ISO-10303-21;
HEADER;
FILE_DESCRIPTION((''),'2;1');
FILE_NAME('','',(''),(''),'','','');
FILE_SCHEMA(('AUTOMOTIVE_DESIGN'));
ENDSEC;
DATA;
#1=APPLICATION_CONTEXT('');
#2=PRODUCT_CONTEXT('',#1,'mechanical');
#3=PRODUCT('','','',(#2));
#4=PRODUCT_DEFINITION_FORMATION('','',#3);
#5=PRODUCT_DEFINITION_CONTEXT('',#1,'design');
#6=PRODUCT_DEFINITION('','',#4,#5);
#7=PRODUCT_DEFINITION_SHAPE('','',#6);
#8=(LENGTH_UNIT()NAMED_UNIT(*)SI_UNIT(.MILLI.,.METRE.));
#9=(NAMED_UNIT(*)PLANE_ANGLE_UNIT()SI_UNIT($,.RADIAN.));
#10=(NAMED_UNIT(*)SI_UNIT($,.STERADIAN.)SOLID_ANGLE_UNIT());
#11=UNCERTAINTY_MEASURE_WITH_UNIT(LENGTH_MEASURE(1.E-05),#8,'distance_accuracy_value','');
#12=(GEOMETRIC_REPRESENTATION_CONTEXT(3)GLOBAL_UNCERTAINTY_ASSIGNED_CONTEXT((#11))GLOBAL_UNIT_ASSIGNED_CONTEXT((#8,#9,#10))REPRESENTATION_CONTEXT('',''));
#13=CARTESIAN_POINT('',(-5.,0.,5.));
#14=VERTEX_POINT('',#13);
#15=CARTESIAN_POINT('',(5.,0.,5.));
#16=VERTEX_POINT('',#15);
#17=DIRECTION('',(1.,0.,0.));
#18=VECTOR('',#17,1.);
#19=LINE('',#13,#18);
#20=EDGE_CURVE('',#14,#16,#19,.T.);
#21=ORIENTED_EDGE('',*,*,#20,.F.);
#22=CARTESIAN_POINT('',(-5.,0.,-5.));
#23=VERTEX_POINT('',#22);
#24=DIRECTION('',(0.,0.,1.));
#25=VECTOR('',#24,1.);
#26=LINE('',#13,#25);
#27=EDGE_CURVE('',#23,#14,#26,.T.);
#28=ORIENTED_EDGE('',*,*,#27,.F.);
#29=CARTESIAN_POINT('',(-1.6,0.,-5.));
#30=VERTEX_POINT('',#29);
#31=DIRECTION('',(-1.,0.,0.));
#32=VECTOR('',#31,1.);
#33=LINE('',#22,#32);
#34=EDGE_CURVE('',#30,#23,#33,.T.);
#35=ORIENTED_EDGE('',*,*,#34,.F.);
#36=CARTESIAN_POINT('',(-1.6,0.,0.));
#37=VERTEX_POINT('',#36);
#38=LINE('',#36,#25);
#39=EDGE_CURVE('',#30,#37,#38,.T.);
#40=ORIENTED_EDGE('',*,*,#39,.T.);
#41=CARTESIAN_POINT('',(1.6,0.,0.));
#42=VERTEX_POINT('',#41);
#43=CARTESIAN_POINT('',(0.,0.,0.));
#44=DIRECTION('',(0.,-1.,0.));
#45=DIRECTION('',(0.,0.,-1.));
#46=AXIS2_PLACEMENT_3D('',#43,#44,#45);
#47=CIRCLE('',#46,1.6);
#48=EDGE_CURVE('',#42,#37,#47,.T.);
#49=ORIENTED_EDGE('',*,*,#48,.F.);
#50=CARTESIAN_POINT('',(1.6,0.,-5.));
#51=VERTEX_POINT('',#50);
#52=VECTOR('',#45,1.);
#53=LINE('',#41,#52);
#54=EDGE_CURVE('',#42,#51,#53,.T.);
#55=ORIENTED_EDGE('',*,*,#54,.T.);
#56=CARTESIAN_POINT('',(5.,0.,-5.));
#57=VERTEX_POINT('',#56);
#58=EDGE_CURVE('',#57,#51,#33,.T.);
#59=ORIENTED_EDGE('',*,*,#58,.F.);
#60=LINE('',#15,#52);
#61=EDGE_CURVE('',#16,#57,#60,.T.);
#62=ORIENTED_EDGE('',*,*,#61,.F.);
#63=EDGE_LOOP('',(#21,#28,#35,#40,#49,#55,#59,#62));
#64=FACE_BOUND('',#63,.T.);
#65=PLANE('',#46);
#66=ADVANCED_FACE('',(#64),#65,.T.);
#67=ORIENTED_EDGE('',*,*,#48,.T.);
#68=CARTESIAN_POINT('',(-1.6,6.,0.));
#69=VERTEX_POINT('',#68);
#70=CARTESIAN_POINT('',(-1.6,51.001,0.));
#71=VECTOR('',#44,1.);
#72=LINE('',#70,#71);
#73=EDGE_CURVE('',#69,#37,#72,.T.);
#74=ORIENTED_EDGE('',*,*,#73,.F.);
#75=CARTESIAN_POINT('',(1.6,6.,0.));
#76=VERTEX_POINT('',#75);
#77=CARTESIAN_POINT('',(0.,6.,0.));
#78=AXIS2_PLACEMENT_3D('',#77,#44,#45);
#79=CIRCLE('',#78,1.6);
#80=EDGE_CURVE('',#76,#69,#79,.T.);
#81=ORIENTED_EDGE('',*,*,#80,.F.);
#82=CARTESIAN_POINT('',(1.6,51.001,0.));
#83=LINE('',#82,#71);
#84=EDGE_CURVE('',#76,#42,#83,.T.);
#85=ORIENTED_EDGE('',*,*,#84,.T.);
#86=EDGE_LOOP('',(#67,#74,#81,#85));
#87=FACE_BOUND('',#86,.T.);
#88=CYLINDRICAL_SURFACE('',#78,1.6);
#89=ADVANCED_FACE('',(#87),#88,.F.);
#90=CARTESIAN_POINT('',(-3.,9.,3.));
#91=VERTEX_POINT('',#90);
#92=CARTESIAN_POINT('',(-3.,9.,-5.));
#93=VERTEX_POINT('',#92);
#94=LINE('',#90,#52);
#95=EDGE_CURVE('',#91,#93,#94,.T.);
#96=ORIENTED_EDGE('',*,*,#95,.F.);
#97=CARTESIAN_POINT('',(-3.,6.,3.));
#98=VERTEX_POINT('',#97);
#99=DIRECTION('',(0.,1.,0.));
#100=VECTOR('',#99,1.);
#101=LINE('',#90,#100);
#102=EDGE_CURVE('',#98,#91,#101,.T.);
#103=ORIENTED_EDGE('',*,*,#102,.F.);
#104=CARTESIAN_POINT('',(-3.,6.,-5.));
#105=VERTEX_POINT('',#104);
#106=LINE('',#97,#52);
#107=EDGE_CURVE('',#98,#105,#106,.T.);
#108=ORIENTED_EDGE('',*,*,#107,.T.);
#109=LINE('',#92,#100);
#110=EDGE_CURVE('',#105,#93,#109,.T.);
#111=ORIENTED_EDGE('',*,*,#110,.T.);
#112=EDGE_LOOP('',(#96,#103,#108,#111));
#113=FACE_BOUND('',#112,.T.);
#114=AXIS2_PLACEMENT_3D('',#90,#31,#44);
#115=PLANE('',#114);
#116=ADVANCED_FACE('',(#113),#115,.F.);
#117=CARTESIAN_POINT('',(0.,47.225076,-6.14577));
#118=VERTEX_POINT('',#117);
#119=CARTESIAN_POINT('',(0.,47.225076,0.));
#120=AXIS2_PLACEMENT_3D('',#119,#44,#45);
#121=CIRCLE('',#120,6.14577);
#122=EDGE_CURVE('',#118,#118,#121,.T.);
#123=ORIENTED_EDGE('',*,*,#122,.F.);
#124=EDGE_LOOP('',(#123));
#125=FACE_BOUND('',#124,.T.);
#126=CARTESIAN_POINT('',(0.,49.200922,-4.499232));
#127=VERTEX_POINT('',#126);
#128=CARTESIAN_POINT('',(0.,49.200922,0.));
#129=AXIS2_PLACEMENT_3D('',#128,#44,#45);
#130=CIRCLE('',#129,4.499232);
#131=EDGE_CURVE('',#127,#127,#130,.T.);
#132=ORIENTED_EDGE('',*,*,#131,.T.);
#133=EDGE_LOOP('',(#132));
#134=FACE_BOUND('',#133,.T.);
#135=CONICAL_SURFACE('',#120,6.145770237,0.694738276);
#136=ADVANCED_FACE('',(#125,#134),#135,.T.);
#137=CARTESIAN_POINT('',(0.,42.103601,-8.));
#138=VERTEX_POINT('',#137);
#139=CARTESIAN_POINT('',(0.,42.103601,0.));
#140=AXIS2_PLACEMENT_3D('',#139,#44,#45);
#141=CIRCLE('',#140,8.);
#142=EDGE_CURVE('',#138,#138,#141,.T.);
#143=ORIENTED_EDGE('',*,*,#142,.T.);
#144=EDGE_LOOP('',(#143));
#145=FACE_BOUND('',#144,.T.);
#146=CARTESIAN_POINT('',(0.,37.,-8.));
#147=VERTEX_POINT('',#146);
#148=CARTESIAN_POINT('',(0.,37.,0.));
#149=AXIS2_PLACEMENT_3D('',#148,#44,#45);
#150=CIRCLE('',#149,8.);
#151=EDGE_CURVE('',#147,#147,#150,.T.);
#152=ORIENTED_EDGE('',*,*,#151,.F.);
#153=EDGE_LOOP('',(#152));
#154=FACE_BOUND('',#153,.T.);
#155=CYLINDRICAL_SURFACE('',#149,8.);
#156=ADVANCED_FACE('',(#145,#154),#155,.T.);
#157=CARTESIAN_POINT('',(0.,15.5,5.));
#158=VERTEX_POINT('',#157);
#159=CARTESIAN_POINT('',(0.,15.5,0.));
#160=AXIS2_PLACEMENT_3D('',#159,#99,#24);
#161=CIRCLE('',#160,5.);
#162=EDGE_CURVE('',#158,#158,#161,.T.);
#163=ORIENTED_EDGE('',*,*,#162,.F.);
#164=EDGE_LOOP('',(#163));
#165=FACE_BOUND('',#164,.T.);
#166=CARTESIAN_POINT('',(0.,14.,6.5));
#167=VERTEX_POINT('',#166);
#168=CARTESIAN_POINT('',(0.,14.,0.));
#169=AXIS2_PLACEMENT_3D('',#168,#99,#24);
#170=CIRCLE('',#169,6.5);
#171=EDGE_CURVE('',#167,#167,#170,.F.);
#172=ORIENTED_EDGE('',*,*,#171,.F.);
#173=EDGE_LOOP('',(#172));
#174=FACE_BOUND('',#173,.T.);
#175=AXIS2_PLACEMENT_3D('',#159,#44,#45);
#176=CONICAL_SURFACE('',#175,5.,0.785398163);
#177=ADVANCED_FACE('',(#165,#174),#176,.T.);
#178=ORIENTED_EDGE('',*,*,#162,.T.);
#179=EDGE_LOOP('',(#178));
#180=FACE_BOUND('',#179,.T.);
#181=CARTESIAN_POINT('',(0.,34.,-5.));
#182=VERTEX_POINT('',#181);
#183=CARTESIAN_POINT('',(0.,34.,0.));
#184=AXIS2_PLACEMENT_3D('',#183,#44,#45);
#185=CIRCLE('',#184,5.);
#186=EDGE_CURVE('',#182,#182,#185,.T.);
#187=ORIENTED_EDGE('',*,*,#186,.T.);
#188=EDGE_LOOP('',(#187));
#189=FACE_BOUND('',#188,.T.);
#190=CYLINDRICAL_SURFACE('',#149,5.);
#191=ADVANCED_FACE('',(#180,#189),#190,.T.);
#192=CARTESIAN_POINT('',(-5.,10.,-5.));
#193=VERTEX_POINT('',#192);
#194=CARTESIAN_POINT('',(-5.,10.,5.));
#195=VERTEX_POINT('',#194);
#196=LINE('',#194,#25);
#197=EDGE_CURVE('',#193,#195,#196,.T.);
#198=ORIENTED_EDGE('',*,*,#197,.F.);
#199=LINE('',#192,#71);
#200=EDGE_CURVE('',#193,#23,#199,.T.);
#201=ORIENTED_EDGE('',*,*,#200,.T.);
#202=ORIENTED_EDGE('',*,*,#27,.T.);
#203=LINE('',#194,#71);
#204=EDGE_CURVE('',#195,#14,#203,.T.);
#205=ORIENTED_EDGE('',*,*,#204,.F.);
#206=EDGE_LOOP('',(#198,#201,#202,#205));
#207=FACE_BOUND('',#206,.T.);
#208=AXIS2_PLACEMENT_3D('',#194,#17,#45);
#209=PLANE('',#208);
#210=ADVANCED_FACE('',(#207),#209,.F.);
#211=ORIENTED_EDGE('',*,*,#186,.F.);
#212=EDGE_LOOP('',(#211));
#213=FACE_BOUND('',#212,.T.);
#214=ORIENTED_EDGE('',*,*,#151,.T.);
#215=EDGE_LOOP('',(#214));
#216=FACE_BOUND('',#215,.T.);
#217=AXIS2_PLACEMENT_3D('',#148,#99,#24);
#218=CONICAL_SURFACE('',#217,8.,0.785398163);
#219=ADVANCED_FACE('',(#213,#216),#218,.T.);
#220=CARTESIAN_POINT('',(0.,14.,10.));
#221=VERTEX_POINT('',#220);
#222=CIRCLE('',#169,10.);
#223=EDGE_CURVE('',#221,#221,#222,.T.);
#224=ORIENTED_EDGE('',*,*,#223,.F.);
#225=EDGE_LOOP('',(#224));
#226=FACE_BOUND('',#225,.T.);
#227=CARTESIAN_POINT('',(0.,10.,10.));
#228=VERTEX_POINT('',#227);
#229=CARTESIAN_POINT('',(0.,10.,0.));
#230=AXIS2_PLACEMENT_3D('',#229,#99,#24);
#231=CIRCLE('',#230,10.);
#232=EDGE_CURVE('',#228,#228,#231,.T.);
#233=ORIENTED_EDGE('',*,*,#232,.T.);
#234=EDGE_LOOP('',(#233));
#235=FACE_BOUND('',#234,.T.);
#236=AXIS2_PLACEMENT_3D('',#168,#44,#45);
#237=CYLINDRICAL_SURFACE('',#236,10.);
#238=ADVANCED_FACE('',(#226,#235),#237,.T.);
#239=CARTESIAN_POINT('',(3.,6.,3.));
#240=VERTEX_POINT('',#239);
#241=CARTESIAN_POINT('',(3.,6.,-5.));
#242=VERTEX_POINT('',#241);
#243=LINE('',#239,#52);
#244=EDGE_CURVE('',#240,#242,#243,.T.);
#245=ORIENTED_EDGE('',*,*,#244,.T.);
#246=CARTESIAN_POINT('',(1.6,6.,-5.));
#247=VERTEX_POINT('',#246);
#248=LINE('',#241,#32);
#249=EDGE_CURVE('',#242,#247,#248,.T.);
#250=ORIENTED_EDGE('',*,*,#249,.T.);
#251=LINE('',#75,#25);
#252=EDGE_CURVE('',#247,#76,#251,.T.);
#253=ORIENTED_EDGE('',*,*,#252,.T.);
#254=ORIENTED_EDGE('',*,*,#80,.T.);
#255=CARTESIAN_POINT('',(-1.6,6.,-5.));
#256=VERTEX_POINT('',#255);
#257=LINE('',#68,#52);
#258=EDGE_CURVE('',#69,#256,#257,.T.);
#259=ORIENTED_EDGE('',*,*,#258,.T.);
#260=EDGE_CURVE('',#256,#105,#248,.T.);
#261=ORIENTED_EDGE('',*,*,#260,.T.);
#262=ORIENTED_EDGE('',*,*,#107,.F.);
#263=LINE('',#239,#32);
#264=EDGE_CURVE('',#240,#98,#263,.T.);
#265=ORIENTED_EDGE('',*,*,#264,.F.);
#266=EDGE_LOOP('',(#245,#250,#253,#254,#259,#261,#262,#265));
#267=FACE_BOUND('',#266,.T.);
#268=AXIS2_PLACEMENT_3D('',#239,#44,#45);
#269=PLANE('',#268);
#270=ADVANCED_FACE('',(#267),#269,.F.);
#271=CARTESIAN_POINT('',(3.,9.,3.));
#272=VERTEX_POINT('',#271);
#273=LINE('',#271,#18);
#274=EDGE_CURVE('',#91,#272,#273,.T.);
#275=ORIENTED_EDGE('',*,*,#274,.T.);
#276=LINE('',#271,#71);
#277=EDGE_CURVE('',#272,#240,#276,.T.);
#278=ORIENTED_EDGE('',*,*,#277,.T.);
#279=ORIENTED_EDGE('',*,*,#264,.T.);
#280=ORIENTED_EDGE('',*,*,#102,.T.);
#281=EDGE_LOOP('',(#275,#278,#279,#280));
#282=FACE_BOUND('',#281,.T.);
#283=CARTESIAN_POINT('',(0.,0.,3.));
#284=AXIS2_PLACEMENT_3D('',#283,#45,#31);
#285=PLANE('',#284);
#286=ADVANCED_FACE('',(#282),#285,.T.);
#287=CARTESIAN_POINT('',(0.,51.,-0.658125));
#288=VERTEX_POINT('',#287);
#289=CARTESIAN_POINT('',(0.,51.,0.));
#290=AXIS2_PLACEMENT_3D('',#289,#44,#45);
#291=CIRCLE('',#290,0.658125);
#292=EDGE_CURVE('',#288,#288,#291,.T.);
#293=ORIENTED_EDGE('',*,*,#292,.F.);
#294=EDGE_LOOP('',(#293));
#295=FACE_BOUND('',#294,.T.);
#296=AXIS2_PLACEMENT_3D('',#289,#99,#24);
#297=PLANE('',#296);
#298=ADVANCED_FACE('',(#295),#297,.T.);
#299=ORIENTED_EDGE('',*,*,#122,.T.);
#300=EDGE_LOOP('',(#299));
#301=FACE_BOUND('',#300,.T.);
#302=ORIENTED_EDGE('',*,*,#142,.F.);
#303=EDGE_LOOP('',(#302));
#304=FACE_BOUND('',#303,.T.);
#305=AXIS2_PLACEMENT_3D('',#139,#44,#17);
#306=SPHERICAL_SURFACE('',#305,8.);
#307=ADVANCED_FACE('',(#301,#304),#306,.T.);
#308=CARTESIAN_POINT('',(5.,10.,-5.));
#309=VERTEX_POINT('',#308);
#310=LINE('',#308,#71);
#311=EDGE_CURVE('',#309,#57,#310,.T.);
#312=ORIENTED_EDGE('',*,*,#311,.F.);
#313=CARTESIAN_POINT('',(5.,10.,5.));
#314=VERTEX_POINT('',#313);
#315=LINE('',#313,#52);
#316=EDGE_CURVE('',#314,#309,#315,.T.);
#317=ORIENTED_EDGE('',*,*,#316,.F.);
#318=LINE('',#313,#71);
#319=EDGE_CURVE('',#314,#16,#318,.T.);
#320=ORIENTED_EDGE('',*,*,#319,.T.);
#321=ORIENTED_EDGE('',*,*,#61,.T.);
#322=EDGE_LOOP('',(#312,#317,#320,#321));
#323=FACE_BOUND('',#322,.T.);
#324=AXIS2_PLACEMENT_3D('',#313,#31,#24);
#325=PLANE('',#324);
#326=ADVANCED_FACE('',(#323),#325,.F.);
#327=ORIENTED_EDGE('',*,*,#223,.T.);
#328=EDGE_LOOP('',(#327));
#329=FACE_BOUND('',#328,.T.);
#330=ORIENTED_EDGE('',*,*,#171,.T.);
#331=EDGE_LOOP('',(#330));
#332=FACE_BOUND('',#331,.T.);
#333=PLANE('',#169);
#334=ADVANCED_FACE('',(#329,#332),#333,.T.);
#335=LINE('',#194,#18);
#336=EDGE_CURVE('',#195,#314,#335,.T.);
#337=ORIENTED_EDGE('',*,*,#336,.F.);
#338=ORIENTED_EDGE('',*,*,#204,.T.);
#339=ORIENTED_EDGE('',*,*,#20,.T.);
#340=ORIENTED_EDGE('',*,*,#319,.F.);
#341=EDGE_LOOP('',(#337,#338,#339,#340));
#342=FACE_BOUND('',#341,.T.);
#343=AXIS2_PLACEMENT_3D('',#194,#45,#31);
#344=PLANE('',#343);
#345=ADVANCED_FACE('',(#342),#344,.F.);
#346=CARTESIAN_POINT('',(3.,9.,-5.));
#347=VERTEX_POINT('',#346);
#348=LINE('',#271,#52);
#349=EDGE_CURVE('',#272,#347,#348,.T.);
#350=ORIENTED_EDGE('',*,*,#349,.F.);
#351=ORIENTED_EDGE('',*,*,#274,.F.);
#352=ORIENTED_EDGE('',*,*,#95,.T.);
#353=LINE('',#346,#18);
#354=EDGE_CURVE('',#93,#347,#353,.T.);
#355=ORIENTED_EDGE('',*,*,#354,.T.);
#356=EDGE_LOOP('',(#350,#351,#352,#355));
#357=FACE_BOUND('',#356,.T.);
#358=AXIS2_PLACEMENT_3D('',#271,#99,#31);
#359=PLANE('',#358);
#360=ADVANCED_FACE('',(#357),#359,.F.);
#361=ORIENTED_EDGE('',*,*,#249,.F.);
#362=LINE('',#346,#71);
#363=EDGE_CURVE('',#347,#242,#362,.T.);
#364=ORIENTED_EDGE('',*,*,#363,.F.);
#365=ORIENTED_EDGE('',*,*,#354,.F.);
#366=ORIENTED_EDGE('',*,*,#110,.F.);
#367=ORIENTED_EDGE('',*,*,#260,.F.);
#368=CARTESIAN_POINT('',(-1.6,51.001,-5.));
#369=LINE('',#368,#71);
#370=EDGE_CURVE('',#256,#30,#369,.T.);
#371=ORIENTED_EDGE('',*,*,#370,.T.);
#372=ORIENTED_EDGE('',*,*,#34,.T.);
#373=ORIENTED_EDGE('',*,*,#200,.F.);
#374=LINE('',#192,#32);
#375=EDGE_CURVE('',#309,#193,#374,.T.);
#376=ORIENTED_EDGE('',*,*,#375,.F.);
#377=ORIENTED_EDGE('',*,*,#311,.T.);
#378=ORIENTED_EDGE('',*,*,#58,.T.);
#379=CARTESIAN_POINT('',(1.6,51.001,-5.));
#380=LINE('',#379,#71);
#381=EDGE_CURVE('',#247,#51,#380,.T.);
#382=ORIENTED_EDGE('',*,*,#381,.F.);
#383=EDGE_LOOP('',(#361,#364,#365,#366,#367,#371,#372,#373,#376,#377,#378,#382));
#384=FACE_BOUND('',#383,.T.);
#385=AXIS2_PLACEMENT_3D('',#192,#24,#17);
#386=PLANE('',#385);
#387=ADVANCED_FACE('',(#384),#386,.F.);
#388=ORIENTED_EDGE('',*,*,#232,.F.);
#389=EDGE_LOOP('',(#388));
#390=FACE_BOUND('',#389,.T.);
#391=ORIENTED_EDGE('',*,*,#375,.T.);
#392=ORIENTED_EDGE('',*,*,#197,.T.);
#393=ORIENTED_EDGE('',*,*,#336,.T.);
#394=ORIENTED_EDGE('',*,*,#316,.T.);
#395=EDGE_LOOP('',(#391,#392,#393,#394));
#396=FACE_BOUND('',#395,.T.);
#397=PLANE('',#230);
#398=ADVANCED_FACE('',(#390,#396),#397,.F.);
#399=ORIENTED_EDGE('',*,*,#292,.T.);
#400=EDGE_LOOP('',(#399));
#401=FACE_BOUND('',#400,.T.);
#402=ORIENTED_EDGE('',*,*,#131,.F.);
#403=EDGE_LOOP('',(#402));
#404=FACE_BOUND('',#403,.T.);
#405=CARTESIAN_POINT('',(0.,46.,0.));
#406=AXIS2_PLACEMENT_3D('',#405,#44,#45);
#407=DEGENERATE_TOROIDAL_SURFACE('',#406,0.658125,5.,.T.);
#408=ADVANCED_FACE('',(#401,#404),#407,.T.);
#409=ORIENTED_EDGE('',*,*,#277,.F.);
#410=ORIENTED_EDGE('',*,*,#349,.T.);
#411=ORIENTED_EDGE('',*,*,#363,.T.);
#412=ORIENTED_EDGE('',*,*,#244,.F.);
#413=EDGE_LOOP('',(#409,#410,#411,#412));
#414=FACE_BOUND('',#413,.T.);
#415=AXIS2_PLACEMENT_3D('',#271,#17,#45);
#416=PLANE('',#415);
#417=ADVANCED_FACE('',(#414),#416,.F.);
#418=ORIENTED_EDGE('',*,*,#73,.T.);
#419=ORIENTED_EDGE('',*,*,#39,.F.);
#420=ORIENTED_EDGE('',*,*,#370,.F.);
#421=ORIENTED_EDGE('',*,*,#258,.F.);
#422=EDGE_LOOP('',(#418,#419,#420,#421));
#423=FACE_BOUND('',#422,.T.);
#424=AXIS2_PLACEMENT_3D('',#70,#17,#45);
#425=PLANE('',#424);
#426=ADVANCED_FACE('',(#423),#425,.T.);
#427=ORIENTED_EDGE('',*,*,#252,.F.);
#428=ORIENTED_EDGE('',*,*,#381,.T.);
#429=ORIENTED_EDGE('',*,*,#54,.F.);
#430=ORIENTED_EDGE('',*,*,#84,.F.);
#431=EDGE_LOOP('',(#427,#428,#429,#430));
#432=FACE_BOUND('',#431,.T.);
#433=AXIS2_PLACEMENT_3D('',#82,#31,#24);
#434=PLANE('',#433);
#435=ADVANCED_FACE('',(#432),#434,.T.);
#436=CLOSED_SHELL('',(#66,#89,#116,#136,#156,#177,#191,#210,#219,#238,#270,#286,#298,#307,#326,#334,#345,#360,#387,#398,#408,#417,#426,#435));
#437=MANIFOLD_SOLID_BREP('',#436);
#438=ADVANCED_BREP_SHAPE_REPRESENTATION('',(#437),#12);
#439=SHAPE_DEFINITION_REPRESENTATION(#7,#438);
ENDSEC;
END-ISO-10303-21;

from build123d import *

# Parameters (mm, degrees)
SKETCH1_W           = 10
SKETCH1_H           = 10
BOSS_EXTRUDE1_DEPTH = 10
SKETCH2_R           = 10
BOSS_EXTRUDE2_DEPTH = 4
SKETCH3_R           = 5
BOSS_EXTRUDE3_DEPTH = 23
CHAMFER1_SIZE       = 3
SKETCH7_R           = 1.6
CUT_EXTRUDE2_DEPTH  = 6
SKETCH8_W           = 6
SKETCH8_H           = 3
CUT_EXTRUDE3_DEPTH  = 8
CUT_EXTRUDE4_REACH  = 54.924
CHAMFER2_SIZE       = 1.5


with BuildPart() as part:
    # Sketch1 → Boss-Extrude1 (new body)
    with BuildSketch(Plane(origin=(0, 0, 0), x_dir=(1, 0, 0), z_dir=(0, 1, 0))):
        Rectangle(SKETCH1_W, SKETCH1_H)
    extrude(amount=BOSS_EXTRUDE1_DEPTH)

    # Sketch2 → Boss-Extrude2 (add)
    with BuildSketch(Plane(origin=(0, 10, 0), x_dir=(1, 0, 0), z_dir=(0, 1, 0))):
        with Locations(Location((0, 0, 0), (0, 0, 270))):
            Circle(SKETCH2_R)
    extrude(amount=BOSS_EXTRUDE2_DEPTH)

    # Sketch3 → Boss-Extrude3 (add)
    with BuildSketch(Plane(origin=(0, 14, 0), x_dir=(1, 0, 0), z_dir=(0, 1, 0))):
        with Locations(Location((0, 0, 0), (0, 0, 270))):
            Circle(SKETCH3_R)
    extrude(amount=BOSS_EXTRUDE3_DEPTH)

    # Sketch4 → Revolve1 (revolve)
    with BuildSketch(Plane.XY, mode=Mode.PRIVATE) as revolve1_sk:
        with BuildLine():
            Line((0, 37), (0, 51))
            Line((0, 51), (0.65812527, 51))
            ThreePointArc((0.65812527, 51), (2.778902251, 50.527947106), (4.499231668, 49.200921998))
            Line((4.499231668, 49.200921998), (6.145770237, 47.225075716))
            ThreePointArc((6.145770237, 47.225075716), (7.522172621, 44.827002629), (8, 42.103600519))
            Line((8, 42.103600519), (8, 37))
            Line((8, 37), (0, 37))
        make_face()
    revolve(revolve1_sk.sketch.rotate(Axis((0, 37, 0), (0, 1, 0)), 90), axis=Axis((0, 37, 0), (0, 1, 0)))

    # Chamfer1
    chamfer1_edges = [part.edges().sort_by_distance(p)[0] for p in [
        (0, 37, -5),
    ]]
    chamfer(chamfer1_edges, length=CHAMFER1_SIZE - 0.0001)  # a hair under: the kernel refuses the full size

    # Sketch7 → Cut-Extrude2 (cut)
    with BuildSketch(Plane.XZ):
        with Locations(Location((0, 0, 0), (0, 0, 270))):
            Circle(SKETCH7_R)
    extrude(amount=-CUT_EXTRUDE2_DEPTH, mode=Mode.SUBTRACT)

    # Sketch8 → Cut-Extrude3 (cut)
    with BuildSketch(Plane(origin=(0, 0, -5), x_dir=(-1, 0, 0), z_dir=(0, 0, -1))):
        with Locations((0, 7.5)):
            Rectangle(SKETCH8_W, SKETCH8_H)
    extrude(amount=-CUT_EXTRUDE3_DEPTH, mode=Mode.SUBTRACT)

    # Sketch9 → Cut-Extrude4 (cut, up to next)
    with BuildSketch(Plane.XZ, mode=Mode.PRIVATE) as cut_extrude4_sk1:
        with BuildLine():
            ThreePointArc((1.6, 0), (0, -1.6), (-1.6, 0))
            Line((-1.6, 0), (-1.6, -5))
            Line((-1.6, -5), (1.6, -5))
            Line((1.6, -5), (1.6, 0))
        make_face()
    cut_extrude4_tool1 = extrude(cut_extrude4_sk1.sketch, amount=-CUT_EXTRUDE4_REACH, mode=Mode.PRIVATE) & part.part
    add(cut_extrude4_tool1.solids().sort_by_distance((0, 0, -3.111284))[0], mode=Mode.SUBTRACT)

    # Chamfer2
    chamfer2_edges = [part.edges().sort_by_distance(p)[0] for p in [
        (0, 14, -5),
    ]]
    chamfer(chamfer2_edges, length=CHAMFER2_SIZE)


solid = part.part
